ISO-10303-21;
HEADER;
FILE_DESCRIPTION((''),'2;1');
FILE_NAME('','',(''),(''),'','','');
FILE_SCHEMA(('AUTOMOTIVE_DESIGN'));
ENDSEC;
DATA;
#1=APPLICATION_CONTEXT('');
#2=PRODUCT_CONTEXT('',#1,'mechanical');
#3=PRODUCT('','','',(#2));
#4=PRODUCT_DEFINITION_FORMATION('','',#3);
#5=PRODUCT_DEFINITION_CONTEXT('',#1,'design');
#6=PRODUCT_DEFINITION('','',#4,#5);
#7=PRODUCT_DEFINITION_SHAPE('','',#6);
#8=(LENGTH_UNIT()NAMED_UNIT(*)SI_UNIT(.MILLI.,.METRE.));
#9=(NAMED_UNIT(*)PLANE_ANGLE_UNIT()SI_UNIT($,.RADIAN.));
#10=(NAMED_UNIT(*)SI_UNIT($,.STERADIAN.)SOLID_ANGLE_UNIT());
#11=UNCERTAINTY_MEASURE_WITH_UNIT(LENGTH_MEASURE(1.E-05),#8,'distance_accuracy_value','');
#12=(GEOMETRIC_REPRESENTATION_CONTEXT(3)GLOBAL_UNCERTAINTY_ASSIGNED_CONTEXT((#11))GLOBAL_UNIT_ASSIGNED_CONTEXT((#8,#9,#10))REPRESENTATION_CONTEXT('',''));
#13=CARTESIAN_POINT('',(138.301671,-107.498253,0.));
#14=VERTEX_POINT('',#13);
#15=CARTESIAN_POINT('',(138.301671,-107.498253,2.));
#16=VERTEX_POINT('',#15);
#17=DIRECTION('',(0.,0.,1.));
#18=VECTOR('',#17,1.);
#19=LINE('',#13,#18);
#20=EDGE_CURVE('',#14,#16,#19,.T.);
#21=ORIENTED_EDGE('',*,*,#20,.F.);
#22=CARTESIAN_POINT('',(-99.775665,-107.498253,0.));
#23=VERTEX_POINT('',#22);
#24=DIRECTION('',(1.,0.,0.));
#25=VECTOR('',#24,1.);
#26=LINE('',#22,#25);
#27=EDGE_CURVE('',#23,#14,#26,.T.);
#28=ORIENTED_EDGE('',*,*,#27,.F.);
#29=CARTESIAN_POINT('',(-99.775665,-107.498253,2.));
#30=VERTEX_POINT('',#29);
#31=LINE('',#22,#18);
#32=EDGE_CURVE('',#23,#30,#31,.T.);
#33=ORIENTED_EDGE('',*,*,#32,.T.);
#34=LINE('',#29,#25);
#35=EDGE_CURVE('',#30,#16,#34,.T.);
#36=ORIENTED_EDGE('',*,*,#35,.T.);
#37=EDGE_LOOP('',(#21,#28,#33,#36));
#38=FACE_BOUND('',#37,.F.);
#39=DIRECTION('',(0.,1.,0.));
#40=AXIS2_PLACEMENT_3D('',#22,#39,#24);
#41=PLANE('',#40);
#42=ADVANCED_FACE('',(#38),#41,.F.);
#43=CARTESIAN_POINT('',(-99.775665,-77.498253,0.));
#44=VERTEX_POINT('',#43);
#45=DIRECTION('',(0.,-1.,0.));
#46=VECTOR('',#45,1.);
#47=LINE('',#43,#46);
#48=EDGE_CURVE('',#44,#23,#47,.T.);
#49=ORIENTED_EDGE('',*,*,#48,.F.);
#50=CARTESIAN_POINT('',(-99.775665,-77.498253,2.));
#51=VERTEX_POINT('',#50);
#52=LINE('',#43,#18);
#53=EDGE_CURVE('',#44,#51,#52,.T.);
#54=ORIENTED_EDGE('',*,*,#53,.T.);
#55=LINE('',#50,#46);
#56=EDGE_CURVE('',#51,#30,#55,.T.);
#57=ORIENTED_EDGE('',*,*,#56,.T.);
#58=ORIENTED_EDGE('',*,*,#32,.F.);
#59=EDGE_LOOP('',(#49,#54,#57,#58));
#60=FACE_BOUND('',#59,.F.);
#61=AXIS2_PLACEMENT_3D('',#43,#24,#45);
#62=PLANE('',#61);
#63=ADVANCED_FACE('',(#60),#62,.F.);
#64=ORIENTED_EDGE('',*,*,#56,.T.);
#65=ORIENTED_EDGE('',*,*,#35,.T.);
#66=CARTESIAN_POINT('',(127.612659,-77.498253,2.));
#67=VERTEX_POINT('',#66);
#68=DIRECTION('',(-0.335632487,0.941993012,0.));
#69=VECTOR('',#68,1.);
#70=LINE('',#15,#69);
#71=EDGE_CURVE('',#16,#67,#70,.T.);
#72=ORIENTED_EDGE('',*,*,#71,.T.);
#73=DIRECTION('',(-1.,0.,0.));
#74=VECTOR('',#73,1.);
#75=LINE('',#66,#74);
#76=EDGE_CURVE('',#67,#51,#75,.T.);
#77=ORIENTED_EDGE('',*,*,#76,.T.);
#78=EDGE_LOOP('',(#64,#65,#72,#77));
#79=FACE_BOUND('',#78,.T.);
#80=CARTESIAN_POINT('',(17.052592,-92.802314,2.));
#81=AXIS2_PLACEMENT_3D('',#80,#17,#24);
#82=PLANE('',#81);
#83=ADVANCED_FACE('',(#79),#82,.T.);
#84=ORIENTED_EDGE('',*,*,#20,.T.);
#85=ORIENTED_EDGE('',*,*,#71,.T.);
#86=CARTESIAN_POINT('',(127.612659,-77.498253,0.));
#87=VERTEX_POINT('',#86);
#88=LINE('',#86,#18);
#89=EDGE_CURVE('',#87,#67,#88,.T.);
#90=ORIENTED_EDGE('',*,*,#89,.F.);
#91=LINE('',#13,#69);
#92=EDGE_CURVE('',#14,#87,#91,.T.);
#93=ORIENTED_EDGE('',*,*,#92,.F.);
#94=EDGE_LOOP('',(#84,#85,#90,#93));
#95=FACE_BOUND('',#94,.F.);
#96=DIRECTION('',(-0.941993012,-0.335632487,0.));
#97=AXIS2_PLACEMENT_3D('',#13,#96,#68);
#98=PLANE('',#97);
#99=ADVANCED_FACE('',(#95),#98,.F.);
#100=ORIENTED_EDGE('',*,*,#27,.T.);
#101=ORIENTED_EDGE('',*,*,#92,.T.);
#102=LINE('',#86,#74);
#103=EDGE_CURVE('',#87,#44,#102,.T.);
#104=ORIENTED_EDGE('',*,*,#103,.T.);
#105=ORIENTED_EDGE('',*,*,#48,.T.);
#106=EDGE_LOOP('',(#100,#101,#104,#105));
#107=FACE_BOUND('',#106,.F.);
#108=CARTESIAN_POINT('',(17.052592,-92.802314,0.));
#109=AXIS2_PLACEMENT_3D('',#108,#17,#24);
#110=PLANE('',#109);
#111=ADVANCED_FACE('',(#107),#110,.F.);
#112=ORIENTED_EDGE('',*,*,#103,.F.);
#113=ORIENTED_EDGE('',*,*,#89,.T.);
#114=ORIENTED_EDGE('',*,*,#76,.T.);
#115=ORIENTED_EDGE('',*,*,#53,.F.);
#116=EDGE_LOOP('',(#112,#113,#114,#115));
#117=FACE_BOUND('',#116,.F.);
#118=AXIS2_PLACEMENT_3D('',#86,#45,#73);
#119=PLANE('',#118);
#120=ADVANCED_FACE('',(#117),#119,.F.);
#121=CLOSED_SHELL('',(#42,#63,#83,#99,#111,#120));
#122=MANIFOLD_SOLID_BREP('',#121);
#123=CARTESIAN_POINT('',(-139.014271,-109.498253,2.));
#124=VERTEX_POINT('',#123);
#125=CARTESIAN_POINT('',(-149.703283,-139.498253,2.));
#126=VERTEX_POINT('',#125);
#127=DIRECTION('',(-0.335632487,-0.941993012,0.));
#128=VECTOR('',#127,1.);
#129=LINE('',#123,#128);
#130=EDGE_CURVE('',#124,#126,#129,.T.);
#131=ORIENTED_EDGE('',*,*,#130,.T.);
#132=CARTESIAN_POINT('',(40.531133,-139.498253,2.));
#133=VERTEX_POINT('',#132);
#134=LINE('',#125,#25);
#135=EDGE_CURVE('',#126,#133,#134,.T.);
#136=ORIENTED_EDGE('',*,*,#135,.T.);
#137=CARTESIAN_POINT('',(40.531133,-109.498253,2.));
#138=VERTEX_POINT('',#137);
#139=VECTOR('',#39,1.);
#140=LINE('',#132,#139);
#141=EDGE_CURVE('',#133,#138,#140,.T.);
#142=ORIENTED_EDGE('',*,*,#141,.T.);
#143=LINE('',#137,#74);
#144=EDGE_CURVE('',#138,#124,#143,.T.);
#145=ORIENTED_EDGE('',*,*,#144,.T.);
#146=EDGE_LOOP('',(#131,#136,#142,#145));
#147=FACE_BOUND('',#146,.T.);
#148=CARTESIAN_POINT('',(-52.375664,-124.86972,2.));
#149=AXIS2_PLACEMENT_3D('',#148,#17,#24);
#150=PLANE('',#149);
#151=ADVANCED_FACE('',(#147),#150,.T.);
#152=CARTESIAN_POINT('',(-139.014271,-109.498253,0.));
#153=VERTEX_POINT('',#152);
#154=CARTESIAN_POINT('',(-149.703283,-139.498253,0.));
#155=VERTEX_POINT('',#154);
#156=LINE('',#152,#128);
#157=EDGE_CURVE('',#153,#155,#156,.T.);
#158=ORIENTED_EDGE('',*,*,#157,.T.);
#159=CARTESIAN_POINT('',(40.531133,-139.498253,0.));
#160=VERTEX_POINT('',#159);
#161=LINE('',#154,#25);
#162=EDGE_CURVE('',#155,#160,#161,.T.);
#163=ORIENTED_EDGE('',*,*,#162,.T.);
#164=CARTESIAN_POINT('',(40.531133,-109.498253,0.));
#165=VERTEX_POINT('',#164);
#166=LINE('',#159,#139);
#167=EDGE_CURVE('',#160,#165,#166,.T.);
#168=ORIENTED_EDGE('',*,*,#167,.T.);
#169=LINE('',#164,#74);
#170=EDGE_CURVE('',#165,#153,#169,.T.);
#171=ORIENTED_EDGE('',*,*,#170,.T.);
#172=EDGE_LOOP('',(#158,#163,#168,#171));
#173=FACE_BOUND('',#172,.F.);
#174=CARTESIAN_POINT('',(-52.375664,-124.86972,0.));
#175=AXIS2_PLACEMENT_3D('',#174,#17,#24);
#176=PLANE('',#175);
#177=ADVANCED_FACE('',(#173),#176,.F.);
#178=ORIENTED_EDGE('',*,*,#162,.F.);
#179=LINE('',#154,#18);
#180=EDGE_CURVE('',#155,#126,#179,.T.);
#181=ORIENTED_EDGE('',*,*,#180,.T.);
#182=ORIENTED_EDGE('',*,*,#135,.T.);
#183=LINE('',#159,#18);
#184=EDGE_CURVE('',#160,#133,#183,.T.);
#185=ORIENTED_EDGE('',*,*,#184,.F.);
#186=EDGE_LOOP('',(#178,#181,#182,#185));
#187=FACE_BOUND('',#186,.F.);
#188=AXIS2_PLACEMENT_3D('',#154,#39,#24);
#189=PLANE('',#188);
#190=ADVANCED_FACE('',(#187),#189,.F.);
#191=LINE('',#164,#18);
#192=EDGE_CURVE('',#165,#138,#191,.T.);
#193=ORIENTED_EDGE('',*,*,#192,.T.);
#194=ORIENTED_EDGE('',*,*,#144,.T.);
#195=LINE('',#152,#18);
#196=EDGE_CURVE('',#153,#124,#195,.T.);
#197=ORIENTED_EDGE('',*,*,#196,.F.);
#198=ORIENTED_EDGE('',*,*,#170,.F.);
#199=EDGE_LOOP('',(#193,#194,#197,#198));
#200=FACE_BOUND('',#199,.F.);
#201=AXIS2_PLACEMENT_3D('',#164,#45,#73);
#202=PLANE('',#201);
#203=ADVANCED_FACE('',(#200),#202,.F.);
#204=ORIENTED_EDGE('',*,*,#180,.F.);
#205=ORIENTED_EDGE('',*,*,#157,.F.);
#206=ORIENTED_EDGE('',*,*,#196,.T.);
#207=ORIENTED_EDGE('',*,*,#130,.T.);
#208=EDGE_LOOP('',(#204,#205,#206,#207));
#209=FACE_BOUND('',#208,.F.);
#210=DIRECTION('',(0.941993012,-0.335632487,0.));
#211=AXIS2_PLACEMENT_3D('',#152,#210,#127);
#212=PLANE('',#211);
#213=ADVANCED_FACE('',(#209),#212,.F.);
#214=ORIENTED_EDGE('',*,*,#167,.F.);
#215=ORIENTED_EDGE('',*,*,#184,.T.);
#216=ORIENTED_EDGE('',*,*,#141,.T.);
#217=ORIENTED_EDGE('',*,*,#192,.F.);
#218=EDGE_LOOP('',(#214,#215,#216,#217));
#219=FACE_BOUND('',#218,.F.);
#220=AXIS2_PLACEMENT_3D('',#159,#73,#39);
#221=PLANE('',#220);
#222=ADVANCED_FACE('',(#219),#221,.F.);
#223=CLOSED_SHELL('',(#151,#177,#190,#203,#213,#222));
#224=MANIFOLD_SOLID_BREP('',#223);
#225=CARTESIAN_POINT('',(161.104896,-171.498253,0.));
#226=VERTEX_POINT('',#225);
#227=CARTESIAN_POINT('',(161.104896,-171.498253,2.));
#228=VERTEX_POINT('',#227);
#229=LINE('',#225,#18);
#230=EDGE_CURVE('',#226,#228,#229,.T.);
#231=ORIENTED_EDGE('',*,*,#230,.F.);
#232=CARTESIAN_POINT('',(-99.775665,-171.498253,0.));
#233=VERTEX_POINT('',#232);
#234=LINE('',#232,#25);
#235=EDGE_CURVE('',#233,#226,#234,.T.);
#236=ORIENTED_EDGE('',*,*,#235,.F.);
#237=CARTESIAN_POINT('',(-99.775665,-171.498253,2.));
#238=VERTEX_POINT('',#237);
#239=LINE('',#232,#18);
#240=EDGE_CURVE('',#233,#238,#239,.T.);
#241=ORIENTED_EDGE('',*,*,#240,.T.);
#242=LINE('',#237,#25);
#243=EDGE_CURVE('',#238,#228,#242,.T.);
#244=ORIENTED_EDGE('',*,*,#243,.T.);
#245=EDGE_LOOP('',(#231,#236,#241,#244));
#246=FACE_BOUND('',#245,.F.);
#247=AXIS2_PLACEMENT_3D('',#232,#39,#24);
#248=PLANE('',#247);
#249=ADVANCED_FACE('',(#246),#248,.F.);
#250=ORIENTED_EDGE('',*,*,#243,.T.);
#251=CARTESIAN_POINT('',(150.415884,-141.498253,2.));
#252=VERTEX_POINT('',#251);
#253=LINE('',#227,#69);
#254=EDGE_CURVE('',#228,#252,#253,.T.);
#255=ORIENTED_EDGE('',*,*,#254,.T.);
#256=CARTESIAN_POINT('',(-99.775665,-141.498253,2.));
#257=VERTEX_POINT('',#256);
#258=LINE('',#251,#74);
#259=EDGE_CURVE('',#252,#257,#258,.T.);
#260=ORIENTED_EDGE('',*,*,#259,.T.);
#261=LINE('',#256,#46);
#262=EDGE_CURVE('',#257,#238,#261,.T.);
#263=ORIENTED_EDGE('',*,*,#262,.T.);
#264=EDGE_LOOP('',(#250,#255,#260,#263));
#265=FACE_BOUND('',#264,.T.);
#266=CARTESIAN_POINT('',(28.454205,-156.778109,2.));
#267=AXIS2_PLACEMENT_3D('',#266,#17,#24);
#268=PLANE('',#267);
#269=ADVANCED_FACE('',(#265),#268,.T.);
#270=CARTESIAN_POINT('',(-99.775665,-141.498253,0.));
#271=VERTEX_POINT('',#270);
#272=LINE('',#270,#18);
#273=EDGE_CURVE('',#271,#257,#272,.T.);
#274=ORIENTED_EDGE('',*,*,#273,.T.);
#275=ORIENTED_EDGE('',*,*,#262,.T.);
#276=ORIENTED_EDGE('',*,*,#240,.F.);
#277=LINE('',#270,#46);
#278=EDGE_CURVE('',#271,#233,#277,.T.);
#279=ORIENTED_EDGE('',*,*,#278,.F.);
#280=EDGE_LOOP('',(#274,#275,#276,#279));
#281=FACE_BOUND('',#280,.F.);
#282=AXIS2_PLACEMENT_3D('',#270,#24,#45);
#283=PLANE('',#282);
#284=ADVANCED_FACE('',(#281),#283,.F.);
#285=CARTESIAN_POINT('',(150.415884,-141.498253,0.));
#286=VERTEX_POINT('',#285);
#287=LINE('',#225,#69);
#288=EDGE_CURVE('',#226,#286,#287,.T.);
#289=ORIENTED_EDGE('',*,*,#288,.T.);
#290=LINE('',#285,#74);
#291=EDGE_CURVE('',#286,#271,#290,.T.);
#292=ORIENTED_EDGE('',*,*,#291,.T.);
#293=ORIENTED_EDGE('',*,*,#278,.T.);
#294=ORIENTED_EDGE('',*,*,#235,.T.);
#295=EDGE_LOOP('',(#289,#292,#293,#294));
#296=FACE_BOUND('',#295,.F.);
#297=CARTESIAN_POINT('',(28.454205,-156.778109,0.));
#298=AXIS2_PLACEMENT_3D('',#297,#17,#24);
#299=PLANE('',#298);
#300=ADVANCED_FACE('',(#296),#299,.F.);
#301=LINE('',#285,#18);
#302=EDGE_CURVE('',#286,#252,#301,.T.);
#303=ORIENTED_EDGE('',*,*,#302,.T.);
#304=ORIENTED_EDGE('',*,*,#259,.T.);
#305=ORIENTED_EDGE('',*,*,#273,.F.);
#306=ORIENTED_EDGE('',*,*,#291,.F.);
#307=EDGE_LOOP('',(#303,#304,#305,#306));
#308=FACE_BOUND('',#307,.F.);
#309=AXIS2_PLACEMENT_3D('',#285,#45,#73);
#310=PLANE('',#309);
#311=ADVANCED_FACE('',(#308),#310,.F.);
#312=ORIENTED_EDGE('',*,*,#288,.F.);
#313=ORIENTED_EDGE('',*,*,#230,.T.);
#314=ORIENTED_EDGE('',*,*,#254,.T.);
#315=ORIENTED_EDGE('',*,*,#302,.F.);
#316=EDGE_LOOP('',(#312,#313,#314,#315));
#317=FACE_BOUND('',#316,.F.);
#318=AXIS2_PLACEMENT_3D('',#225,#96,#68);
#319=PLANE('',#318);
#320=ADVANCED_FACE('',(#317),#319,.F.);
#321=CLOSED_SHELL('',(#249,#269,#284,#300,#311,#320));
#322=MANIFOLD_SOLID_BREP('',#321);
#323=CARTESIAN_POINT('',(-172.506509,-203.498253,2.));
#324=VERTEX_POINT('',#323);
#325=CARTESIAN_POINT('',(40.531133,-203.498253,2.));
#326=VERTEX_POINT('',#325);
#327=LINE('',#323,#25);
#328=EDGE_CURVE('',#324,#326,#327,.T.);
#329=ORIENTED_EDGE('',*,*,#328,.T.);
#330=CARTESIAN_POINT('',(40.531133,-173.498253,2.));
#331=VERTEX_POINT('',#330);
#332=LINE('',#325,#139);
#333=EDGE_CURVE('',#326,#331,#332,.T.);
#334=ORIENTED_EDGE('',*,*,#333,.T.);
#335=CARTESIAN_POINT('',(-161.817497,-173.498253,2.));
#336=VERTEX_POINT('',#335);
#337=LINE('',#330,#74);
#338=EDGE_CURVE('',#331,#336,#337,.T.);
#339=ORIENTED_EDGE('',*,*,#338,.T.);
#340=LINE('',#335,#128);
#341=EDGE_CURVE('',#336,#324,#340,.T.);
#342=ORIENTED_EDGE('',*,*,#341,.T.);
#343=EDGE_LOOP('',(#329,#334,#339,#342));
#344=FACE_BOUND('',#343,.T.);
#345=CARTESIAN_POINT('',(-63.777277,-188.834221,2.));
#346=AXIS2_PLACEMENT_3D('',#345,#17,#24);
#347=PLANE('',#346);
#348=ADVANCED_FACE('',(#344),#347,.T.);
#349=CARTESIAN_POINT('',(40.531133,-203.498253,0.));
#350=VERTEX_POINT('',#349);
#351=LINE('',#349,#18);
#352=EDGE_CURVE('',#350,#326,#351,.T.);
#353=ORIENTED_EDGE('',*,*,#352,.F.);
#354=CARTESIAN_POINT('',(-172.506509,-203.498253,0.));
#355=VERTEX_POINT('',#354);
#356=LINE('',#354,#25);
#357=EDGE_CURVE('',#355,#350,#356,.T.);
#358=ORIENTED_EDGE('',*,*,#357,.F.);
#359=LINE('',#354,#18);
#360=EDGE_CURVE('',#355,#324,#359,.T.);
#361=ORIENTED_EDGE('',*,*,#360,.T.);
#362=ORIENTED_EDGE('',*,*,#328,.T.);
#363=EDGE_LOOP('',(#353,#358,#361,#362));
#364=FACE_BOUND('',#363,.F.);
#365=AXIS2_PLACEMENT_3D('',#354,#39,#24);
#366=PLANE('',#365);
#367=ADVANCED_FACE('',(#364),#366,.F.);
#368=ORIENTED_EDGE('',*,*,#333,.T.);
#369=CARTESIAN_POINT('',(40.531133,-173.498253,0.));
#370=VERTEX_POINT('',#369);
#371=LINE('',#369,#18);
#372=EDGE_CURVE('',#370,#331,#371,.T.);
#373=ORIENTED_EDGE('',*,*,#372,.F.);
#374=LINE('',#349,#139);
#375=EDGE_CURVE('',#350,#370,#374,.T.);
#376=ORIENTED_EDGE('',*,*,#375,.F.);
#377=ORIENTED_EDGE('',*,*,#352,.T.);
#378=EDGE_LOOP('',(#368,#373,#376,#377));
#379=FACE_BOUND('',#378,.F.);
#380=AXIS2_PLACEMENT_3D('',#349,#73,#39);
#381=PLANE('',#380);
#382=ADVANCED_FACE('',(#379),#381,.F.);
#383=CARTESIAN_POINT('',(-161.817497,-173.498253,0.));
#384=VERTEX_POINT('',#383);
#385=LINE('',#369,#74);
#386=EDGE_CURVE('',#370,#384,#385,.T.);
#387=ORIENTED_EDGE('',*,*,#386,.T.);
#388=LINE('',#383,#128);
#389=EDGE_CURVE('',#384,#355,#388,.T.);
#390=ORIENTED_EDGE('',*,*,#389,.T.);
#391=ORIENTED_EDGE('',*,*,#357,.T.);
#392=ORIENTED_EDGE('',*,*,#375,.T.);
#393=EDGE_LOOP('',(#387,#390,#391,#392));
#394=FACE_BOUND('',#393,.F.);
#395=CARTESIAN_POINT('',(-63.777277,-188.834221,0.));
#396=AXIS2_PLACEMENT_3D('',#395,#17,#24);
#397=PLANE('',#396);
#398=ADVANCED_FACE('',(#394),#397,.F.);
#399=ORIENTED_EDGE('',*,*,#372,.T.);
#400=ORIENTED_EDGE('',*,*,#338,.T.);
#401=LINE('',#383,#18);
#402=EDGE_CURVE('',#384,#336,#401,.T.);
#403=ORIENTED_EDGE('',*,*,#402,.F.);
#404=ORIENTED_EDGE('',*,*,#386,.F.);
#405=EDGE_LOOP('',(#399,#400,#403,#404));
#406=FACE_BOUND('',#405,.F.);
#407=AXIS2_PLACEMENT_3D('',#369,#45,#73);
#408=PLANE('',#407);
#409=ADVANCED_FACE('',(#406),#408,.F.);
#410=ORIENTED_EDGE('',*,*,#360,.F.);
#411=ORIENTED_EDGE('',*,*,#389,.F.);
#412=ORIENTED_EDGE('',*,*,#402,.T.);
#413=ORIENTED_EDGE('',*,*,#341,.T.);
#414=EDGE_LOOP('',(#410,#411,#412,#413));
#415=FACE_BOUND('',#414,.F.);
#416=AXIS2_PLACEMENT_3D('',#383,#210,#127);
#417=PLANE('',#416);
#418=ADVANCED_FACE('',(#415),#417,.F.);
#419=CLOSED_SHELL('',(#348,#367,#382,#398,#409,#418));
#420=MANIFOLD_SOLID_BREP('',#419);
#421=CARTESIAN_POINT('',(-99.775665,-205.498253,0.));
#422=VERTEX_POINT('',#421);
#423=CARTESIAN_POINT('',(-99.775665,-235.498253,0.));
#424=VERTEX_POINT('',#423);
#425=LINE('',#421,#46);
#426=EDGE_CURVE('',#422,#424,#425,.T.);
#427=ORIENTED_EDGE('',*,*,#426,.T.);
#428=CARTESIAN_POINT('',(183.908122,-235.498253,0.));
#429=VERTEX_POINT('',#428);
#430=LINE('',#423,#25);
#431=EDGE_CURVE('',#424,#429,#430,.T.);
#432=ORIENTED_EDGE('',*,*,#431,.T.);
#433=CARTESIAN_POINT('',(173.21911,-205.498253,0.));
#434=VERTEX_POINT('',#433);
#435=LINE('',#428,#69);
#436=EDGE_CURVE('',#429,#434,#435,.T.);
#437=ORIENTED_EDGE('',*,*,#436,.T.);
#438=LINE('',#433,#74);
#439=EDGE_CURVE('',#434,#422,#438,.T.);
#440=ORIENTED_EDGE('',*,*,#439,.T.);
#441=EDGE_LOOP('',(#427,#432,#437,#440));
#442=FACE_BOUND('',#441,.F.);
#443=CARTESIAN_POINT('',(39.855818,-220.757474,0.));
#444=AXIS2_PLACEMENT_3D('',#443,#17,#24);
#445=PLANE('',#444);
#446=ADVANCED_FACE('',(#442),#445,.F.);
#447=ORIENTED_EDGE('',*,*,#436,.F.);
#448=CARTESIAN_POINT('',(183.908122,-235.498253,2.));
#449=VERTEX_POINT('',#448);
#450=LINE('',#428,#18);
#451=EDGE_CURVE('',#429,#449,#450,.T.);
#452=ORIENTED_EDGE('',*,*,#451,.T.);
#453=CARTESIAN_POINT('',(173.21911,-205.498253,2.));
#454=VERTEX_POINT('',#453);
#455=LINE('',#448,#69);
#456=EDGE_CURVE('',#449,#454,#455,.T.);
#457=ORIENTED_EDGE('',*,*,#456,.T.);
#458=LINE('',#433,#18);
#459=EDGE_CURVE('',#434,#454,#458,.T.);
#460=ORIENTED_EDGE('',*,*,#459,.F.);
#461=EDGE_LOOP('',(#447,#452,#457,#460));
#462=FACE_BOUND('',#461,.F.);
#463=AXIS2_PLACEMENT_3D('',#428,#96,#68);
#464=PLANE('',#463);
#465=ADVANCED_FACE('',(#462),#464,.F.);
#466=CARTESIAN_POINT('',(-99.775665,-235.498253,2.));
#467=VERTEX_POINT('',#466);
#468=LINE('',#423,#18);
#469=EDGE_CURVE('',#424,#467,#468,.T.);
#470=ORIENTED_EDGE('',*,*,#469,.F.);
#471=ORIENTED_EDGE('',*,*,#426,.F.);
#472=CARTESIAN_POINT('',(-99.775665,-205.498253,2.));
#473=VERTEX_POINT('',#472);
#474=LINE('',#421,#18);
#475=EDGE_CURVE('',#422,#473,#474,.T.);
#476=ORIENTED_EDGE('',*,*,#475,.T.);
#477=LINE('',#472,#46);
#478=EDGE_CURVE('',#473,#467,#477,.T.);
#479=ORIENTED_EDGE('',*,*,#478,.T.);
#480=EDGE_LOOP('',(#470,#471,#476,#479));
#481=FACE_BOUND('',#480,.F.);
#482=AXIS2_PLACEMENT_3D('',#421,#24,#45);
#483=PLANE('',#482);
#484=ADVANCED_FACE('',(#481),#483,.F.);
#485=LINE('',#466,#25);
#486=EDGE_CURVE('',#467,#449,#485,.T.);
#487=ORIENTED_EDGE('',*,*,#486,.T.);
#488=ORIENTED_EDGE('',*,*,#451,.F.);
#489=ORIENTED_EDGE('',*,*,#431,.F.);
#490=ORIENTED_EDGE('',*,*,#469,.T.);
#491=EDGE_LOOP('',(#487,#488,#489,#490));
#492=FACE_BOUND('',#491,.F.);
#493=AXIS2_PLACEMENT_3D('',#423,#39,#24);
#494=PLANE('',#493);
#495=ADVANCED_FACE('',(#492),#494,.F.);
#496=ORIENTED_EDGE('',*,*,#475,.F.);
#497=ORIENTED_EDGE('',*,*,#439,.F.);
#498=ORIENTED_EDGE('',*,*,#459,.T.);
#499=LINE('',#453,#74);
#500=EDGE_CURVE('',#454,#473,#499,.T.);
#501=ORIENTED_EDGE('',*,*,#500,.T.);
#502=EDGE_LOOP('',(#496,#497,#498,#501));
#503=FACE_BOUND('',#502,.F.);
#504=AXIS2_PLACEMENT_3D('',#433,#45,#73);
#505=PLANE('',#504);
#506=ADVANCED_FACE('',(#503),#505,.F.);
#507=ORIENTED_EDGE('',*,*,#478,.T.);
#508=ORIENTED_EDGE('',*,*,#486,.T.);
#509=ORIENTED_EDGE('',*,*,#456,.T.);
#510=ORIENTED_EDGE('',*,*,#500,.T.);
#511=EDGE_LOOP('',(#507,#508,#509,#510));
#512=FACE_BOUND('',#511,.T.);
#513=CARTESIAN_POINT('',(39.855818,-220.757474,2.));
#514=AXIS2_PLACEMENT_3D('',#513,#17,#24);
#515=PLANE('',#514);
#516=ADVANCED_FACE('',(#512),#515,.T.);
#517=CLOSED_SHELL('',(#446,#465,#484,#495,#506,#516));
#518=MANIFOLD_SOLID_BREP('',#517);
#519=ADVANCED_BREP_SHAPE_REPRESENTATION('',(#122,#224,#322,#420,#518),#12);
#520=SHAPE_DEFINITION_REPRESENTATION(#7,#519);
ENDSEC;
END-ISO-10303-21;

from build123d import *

# Parameters (mm, degrees)
F3_DEPTH = 2


# Not quite as in the source:
# - the program builds the solid bodies; features that only make, move or delete a surface that nothing else refers to are left out


with BuildPart() as f3:
    # F2 (on Top) → F3 (new body)
    with BuildSketch(Plane.XY):
        Polygon((-99.7756651271, -235.4982528798), (183.9081217199, -235.4982528798), (173.2191097174, -205.4982528798), (-99.7756651271, -205.4982528798), align=None)
    extrude(amount=F3_DEPTH)


with BuildPart() as f3b:
    # F2 (on Top) → F3, piece 2 (new body)
    with BuildSketch(Plane.XY):
        Polygon((-161.8174969148, -173.4982528798), (-172.5065089173, -203.4982528798), (40.5311334112, -203.4982528798), (40.5311334112, -173.4982528798), align=None)
    extrude(amount=F3_DEPTH)


with BuildPart() as f3c:
    # F2 (on Top) → F3, piece 3 (new body)
    with BuildSketch(Plane.XY):
        Polygon((-99.7756651271, -141.4982528798), (-99.7756651271, -171.4982528798), (161.1048961146, -171.4982528798), (150.4158841121, -141.4982528798), align=None)
    extrude(amount=F3_DEPTH)


with BuildPart() as f3d:
    # F2 (on Top) → F3, piece 4 (new body)
    with BuildSketch(Plane.XY):
        Polygon((-139.0142713095, -109.4982528798), (-149.703283312, -139.4982528798), (40.5311334112, -139.4982528798), (40.5311334112, -109.4982528798), align=None)
    extrude(amount=F3_DEPTH)


with BuildPart() as f3e:
    # F2 (on Top) → F3, piece 5 (new body)
    with BuildSketch(Plane.XY):
        Polygon((-99.7756651271, -107.4982528798), (138.3016705093, -107.4982528798), (127.6126585068, -77.4982528798), (-99.7756651271, -77.4982528798), align=None)
    extrude(amount=F3_DEPTH)


solid = Compound([f3.part, f3b.part, f3c.part, f3d.part, f3e.part])
